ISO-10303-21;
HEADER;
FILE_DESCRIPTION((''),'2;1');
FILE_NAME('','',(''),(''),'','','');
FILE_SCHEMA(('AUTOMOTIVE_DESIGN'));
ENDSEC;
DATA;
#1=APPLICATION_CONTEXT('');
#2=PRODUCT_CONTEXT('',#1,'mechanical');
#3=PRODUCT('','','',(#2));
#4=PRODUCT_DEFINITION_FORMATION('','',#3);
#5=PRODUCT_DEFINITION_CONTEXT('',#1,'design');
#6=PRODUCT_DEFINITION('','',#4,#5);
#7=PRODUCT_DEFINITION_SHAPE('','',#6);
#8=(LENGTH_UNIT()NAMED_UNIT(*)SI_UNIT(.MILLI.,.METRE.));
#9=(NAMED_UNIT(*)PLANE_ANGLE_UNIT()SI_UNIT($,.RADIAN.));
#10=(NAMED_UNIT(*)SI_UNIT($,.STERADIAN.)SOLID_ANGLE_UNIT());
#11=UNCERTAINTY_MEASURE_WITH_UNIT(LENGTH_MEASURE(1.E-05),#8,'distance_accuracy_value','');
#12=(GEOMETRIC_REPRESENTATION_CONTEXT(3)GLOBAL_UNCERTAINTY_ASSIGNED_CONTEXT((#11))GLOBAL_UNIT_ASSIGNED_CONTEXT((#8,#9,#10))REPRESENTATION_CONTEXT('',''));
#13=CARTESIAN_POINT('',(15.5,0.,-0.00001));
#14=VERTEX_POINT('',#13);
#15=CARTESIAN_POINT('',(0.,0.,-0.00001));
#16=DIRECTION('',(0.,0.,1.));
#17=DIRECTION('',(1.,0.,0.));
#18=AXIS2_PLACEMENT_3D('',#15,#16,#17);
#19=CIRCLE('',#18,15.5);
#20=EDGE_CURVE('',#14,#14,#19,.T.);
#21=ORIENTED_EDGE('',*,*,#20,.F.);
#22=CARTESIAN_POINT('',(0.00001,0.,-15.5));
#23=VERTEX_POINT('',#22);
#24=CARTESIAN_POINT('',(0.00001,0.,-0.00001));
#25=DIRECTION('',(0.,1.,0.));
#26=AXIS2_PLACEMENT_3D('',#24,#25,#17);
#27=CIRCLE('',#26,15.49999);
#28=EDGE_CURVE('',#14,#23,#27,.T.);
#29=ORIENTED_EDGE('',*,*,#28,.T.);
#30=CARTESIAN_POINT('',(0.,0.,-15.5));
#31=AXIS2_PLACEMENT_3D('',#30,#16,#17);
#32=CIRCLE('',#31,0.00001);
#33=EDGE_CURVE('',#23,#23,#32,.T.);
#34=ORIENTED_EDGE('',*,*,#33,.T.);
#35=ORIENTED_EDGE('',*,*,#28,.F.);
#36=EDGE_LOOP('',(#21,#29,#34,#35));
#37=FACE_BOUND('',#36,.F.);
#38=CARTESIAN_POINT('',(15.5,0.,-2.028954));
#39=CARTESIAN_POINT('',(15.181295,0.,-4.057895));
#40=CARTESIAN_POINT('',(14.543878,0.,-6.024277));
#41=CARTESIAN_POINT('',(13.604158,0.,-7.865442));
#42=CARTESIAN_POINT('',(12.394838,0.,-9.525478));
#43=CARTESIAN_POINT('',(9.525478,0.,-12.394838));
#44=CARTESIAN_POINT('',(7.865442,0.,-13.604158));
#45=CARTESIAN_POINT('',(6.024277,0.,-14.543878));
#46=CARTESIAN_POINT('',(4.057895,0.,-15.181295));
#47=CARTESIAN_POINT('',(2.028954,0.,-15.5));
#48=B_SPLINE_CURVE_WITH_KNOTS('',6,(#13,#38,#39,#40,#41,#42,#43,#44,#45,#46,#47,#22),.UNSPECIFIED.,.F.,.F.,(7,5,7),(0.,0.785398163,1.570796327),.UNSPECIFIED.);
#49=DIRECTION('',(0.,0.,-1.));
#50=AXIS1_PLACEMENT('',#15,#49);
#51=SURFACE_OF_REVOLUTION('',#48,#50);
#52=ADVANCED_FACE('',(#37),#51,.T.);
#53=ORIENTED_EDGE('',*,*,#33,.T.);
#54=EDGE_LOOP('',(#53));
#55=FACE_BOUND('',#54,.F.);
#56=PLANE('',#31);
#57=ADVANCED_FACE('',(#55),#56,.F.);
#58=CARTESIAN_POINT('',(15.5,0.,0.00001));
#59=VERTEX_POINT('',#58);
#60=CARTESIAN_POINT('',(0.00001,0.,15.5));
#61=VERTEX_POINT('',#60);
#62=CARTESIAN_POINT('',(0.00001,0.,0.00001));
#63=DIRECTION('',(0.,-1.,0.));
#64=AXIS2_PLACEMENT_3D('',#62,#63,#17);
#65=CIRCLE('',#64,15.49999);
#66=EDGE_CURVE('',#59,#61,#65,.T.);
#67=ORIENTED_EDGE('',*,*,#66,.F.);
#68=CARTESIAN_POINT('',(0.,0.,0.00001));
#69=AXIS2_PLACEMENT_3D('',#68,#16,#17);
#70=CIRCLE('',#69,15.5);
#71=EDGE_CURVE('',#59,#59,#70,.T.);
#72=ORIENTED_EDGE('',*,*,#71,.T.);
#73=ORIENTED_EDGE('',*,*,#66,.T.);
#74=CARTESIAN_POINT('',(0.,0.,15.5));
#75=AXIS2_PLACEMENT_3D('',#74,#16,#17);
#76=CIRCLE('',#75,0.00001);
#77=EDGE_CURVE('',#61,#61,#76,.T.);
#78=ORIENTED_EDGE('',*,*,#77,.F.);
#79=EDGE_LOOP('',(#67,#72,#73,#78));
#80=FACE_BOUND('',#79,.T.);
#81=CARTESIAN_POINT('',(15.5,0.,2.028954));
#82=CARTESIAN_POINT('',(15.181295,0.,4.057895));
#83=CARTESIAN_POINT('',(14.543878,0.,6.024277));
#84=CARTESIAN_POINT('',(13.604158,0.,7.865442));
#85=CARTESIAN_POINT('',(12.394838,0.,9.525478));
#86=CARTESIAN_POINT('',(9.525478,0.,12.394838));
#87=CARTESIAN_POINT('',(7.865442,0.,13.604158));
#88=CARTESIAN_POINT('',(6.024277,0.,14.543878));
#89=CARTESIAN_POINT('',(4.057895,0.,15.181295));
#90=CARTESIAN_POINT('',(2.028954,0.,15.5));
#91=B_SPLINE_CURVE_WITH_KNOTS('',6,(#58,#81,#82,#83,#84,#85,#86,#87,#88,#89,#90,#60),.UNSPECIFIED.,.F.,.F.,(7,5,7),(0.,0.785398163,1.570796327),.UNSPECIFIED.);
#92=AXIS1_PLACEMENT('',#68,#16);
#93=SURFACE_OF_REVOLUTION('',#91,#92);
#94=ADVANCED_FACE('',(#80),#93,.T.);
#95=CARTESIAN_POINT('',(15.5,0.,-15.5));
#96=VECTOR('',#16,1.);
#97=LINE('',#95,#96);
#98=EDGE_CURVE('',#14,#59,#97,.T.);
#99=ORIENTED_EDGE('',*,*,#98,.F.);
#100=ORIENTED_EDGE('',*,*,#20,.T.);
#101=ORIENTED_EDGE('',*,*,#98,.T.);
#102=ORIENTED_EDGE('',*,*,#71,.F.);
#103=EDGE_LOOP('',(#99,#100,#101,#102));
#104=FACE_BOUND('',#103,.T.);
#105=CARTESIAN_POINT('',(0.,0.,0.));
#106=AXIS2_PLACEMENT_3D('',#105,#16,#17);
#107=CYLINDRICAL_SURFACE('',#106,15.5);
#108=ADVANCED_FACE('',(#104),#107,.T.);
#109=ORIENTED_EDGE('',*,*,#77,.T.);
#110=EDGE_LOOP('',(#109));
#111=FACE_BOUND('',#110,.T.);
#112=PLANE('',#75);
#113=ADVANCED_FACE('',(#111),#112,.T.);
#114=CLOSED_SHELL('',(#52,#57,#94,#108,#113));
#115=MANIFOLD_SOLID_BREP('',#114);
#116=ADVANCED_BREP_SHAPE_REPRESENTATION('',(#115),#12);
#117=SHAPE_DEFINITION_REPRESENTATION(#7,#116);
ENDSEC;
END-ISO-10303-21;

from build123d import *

# Parameters (mm, degrees)
F0_R          = 15.5
F1_DEPTH      = 15.5
F1_DEPTH_BACK = 15.5
F2_R          = 15.49999


# Not quite as in the source:
# - a fillet or chamfer is up to 0.001 mm smaller than in the source, because OpenCascade refuses the exact size


with BuildPart() as f1:
    # F0 (on Top) → F1 (new body, two sides)
    with BuildSketch(Plane.XY) as f1_sk:
        Circle(F0_R)
    extrude(amount=F1_DEPTH)
    extrude(f1_sk.sketch, amount=-F1_DEPTH_BACK)

    # F2 (radius 15.5 in the source; OpenCascade refuses exactly that, so slightly less here)
    f2_edges = [f1.edges().sort_by_distance(p)[0] for p in [
        (-15.5, 0, 15.5),
        (-15.5, 0, -15.5),
    ]]
    fillet(f2_edges, radius=F2_R)


solid = f1.part
